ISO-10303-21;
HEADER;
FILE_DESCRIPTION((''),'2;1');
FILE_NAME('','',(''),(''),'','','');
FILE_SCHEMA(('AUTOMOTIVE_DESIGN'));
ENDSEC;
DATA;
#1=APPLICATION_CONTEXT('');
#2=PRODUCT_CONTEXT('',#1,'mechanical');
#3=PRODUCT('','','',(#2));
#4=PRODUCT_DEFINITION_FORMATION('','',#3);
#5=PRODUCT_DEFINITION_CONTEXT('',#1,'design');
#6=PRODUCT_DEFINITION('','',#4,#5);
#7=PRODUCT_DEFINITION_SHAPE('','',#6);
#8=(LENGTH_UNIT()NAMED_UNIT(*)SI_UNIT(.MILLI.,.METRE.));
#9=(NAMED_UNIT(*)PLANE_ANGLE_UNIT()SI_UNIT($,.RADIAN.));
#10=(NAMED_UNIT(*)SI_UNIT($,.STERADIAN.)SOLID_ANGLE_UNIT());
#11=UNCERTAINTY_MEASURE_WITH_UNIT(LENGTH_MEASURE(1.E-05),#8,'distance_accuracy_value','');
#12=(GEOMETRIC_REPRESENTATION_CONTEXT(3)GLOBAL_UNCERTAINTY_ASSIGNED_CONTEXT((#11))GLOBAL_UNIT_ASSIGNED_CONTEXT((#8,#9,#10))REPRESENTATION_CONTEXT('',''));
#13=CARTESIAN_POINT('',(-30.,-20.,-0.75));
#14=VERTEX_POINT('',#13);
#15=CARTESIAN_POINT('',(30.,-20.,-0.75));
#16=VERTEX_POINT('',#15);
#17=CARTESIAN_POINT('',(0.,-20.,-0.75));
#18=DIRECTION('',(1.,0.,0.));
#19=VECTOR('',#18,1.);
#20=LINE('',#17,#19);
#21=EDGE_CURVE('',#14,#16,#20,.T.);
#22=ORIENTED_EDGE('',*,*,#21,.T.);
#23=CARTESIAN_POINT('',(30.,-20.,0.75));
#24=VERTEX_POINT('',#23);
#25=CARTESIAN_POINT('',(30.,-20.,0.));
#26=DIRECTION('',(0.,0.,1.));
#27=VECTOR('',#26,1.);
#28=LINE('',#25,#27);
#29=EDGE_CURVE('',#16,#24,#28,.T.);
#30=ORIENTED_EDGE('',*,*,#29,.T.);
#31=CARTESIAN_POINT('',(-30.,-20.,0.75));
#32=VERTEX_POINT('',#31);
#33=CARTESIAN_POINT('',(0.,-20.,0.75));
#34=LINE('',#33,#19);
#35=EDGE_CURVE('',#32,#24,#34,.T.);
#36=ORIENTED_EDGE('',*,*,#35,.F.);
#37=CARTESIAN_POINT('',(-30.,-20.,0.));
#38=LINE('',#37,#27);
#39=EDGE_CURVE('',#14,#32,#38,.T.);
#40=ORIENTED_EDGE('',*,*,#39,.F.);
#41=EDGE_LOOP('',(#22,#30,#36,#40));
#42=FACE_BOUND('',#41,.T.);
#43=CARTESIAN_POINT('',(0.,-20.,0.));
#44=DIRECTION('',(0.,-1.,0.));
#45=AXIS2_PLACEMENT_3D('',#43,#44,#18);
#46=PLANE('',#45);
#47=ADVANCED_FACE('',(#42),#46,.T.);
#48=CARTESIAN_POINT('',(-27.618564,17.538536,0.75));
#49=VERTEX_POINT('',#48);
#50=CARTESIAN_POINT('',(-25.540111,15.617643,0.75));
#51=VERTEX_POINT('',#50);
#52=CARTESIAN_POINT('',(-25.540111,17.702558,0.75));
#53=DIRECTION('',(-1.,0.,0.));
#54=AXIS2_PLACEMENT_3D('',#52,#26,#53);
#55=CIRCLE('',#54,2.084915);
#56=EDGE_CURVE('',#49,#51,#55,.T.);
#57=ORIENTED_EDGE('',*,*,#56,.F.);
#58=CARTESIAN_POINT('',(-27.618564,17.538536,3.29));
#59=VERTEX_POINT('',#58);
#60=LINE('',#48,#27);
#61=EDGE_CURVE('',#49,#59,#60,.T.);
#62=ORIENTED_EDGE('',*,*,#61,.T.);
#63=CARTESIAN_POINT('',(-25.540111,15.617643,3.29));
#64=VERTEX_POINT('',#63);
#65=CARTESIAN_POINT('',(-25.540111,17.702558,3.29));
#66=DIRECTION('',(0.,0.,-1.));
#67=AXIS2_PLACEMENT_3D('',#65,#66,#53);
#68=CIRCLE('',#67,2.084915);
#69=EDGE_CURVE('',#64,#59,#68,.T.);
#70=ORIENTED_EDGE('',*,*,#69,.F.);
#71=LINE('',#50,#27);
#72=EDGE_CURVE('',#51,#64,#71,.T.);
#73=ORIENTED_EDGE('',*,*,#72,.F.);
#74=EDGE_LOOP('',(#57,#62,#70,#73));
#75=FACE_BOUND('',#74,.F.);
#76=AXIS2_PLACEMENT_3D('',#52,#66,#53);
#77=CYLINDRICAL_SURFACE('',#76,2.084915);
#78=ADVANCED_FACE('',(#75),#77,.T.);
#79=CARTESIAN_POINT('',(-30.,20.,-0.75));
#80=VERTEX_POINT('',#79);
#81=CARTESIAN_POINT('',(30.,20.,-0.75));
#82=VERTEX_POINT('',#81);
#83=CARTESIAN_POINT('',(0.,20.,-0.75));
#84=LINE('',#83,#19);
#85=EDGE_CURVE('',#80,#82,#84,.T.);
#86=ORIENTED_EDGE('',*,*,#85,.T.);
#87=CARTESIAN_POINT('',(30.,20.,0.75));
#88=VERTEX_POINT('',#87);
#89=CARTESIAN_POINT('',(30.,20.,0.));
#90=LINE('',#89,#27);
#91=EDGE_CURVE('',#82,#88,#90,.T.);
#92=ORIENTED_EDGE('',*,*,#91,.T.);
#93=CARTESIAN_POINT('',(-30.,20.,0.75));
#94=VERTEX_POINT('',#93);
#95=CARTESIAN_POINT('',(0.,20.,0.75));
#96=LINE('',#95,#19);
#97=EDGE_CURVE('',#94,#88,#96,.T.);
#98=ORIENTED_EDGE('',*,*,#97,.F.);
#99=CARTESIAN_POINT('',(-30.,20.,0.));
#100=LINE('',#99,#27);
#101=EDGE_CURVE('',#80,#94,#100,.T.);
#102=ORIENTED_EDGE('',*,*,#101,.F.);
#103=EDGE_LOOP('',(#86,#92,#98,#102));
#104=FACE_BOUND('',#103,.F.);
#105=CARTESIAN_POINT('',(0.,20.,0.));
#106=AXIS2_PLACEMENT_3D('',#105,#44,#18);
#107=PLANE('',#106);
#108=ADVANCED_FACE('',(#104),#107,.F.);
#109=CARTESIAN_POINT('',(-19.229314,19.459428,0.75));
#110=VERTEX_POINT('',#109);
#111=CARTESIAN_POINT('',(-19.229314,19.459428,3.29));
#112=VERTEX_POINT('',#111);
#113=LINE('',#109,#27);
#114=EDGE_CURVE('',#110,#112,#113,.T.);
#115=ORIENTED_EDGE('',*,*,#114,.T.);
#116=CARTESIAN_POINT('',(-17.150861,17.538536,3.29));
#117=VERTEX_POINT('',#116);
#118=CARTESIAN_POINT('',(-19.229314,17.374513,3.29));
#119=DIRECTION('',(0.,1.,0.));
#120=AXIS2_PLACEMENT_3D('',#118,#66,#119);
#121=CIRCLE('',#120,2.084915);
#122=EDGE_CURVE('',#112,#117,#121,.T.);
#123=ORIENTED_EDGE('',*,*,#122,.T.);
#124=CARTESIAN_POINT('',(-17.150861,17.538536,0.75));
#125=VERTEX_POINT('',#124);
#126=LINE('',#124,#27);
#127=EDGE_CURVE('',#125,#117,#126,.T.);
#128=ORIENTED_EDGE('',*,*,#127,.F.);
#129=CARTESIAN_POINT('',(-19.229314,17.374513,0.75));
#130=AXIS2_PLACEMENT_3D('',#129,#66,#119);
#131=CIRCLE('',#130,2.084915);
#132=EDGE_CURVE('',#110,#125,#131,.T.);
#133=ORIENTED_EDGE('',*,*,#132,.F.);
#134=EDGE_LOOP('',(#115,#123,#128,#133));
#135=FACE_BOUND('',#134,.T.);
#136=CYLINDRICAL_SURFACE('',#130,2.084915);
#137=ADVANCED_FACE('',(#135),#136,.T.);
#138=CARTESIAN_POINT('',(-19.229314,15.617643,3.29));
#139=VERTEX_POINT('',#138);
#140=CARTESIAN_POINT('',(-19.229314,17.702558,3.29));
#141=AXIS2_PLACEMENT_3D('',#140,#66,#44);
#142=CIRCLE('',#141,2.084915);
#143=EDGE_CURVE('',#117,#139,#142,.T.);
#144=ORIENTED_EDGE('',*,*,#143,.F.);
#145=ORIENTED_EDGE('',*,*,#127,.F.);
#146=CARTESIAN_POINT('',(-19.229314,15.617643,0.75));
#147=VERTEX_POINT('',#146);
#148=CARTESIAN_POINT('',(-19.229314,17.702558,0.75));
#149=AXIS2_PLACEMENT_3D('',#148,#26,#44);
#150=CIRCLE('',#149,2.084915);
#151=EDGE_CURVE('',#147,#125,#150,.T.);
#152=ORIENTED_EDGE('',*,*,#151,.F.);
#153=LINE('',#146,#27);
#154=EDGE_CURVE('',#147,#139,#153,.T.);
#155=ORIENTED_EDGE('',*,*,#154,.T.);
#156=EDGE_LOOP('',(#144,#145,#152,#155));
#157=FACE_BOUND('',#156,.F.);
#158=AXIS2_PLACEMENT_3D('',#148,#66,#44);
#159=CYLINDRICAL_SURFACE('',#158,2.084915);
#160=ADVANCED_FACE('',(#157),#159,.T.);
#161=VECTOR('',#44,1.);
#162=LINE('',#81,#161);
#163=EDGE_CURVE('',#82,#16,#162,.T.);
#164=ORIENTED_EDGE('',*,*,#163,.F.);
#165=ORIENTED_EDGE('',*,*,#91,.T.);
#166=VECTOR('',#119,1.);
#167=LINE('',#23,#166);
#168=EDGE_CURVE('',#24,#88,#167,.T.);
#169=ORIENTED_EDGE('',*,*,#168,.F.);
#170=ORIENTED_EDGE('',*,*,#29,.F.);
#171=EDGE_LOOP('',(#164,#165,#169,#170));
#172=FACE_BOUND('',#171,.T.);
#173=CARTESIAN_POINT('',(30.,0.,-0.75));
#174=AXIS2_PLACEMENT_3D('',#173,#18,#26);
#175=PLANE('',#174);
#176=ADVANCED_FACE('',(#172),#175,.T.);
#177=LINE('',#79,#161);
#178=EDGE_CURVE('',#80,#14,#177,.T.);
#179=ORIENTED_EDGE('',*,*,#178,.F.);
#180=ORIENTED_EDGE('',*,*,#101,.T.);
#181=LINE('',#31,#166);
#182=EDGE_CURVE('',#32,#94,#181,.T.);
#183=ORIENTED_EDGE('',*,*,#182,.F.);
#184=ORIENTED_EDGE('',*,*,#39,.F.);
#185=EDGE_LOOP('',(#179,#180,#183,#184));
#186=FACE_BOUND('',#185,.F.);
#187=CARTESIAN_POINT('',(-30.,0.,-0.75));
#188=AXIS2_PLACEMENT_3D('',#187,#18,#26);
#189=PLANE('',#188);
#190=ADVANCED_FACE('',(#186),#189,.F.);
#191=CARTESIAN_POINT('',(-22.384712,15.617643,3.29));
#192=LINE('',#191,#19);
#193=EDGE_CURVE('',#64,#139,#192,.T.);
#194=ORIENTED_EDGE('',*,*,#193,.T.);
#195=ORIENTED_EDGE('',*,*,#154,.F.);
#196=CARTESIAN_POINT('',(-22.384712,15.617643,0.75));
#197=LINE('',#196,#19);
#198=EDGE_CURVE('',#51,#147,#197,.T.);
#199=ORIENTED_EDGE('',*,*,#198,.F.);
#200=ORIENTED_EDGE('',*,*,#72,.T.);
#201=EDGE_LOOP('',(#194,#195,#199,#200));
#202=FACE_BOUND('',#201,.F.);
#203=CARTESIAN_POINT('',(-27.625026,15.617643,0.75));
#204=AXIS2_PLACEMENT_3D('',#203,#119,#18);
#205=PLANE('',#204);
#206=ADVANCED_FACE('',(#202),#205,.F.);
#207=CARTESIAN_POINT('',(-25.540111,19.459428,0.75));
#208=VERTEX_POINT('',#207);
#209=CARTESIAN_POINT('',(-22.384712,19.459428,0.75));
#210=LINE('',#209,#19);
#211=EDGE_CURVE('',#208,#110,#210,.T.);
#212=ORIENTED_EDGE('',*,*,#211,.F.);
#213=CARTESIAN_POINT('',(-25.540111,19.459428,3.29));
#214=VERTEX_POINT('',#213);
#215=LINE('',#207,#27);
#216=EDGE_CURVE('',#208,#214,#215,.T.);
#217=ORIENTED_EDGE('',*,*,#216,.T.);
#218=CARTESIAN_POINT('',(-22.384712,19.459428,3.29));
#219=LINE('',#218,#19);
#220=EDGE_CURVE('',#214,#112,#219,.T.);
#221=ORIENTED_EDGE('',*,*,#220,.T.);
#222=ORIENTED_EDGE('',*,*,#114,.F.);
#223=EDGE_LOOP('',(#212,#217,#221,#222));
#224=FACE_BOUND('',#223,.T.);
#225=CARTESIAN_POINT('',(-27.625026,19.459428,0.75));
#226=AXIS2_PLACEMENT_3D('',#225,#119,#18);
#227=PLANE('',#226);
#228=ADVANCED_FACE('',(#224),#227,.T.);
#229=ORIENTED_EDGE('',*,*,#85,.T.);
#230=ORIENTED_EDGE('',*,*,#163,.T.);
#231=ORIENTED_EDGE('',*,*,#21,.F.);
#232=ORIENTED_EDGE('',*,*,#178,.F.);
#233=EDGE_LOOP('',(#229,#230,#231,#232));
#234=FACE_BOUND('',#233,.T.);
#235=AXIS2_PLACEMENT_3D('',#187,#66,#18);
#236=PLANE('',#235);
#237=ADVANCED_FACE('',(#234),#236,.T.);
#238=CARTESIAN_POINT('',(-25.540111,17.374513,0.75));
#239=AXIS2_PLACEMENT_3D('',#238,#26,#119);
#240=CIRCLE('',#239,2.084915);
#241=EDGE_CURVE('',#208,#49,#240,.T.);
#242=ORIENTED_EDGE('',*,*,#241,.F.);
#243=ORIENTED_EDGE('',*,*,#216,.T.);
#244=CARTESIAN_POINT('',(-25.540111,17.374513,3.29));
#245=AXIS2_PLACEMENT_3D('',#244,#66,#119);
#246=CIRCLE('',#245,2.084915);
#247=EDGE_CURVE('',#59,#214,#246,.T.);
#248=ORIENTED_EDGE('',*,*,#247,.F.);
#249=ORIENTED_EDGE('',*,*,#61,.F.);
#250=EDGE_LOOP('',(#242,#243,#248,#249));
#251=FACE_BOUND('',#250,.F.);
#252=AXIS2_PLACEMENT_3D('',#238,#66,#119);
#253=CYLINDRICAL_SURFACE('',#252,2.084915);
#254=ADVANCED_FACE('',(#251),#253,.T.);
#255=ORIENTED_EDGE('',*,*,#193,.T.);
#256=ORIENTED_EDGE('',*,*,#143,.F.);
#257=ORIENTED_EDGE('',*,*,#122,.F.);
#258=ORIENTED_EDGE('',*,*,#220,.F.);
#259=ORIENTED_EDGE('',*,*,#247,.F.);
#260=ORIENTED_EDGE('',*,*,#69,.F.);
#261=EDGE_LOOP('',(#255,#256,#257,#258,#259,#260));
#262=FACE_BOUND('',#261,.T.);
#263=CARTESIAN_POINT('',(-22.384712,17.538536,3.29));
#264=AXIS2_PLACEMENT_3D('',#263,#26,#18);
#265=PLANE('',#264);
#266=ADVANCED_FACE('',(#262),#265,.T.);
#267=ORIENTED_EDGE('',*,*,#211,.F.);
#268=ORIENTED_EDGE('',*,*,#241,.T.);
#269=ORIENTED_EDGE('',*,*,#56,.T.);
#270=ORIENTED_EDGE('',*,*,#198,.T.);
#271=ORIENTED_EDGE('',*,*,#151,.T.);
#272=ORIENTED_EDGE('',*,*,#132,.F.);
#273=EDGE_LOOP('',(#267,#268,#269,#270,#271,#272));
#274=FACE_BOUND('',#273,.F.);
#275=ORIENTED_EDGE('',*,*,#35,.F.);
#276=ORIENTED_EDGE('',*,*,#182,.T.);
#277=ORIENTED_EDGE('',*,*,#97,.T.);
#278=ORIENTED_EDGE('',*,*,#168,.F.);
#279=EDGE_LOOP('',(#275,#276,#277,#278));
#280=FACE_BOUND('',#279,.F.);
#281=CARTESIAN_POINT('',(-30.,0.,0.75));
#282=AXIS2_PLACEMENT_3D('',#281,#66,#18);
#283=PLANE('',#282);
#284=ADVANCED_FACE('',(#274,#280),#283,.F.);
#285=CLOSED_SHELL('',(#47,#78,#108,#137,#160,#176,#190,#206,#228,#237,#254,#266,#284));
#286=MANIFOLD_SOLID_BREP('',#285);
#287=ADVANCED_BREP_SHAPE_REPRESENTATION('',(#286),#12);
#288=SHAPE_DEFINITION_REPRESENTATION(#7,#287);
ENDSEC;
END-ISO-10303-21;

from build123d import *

# Parameters (mm, degrees)
F0_W        = 60
F0_H        = 1.5
F1_DEPTH    = 20
F2_W        = 10.4806274176
F2_H        = 3.8417847827
F3_DEPTH    = 2.54
F4_T1_DEPTH = 7.7522870812


# Not quite as in the source:
# - a fillet or chamfer that OpenCascade refuses, or shapes differently, is made with other operations: its cross-section is extruded or revolved along the edge and cut away or added


with BuildPart() as f1:
    # F0 (on Front) → F1 (new body, symmetric)
    with BuildSketch(Plane.XZ):
        Rectangle(F0_W, F0_H)
    extrude(amount=F1_DEPTH, both=True)

    # F2 (on face) → F3 (join)
    with BuildSketch(Plane.XY.offset(0.75)):
        with Locations((-22.3847124726, 17.5385358743)):
            Rectangle(F2_W, F2_H)
    extrude(amount=F3_DEPTH)

    # F4: fillet of radius 2.0849148325 on 4 edges, made by hand

    # F4_s2 → F4_t1 (cut)
    with BuildSketch(Plane.XY.offset(0.75)):
        with BuildLine():
            ThreePointArc((-27.6250261813, 17.7025583154), (-27.0143687651, 16.2283008992), (-25.5401113489, 15.617643483))
            Line((-25.5401113489, 15.617643483), (-27.6250261813, 15.617643483))
            Line((-27.6250261813, 15.617643483), (-27.6250261813, 17.7025583154))
        make_face()
        with BuildLine():
            ThreePointArc((-25.5401113489, 19.4594282657), (-27.0143687651, 18.8487708495), (-27.6250261813, 17.3745134332))
            Line((-27.6250261813, 17.3745134332), (-27.6250261813, 19.4594282657))
            Line((-27.6250261813, 19.4594282657), (-25.5401113489, 19.4594282657))
        make_face()
        with BuildLine():
            ThreePointArc((-19.2293135962, 15.617643483), (-17.75505618, 16.2283008992), (-17.1443987638, 17.7025583154))
            Line((-17.1443987638, 17.7025583154), (-17.1443987638, 15.617643483))
            Line((-17.1443987638, 15.617643483), (-19.2293135962, 15.617643483))
        make_face()
        with BuildLine():
            ThreePointArc((-19.2293135962, 19.4594282657), (-17.75505618, 18.8487708495), (-17.1443987638, 17.3745134332))
            Line((-17.1443987638, 17.3745134332), (-17.1443987638, 19.4594282657))
            Line((-17.1443987638, 19.4594282657), (-19.2293135962, 19.4594282657))
        make_face()
    extrude(amount=F4_T1_DEPTH, mode=Mode.SUBTRACT)


solid = f1.part
